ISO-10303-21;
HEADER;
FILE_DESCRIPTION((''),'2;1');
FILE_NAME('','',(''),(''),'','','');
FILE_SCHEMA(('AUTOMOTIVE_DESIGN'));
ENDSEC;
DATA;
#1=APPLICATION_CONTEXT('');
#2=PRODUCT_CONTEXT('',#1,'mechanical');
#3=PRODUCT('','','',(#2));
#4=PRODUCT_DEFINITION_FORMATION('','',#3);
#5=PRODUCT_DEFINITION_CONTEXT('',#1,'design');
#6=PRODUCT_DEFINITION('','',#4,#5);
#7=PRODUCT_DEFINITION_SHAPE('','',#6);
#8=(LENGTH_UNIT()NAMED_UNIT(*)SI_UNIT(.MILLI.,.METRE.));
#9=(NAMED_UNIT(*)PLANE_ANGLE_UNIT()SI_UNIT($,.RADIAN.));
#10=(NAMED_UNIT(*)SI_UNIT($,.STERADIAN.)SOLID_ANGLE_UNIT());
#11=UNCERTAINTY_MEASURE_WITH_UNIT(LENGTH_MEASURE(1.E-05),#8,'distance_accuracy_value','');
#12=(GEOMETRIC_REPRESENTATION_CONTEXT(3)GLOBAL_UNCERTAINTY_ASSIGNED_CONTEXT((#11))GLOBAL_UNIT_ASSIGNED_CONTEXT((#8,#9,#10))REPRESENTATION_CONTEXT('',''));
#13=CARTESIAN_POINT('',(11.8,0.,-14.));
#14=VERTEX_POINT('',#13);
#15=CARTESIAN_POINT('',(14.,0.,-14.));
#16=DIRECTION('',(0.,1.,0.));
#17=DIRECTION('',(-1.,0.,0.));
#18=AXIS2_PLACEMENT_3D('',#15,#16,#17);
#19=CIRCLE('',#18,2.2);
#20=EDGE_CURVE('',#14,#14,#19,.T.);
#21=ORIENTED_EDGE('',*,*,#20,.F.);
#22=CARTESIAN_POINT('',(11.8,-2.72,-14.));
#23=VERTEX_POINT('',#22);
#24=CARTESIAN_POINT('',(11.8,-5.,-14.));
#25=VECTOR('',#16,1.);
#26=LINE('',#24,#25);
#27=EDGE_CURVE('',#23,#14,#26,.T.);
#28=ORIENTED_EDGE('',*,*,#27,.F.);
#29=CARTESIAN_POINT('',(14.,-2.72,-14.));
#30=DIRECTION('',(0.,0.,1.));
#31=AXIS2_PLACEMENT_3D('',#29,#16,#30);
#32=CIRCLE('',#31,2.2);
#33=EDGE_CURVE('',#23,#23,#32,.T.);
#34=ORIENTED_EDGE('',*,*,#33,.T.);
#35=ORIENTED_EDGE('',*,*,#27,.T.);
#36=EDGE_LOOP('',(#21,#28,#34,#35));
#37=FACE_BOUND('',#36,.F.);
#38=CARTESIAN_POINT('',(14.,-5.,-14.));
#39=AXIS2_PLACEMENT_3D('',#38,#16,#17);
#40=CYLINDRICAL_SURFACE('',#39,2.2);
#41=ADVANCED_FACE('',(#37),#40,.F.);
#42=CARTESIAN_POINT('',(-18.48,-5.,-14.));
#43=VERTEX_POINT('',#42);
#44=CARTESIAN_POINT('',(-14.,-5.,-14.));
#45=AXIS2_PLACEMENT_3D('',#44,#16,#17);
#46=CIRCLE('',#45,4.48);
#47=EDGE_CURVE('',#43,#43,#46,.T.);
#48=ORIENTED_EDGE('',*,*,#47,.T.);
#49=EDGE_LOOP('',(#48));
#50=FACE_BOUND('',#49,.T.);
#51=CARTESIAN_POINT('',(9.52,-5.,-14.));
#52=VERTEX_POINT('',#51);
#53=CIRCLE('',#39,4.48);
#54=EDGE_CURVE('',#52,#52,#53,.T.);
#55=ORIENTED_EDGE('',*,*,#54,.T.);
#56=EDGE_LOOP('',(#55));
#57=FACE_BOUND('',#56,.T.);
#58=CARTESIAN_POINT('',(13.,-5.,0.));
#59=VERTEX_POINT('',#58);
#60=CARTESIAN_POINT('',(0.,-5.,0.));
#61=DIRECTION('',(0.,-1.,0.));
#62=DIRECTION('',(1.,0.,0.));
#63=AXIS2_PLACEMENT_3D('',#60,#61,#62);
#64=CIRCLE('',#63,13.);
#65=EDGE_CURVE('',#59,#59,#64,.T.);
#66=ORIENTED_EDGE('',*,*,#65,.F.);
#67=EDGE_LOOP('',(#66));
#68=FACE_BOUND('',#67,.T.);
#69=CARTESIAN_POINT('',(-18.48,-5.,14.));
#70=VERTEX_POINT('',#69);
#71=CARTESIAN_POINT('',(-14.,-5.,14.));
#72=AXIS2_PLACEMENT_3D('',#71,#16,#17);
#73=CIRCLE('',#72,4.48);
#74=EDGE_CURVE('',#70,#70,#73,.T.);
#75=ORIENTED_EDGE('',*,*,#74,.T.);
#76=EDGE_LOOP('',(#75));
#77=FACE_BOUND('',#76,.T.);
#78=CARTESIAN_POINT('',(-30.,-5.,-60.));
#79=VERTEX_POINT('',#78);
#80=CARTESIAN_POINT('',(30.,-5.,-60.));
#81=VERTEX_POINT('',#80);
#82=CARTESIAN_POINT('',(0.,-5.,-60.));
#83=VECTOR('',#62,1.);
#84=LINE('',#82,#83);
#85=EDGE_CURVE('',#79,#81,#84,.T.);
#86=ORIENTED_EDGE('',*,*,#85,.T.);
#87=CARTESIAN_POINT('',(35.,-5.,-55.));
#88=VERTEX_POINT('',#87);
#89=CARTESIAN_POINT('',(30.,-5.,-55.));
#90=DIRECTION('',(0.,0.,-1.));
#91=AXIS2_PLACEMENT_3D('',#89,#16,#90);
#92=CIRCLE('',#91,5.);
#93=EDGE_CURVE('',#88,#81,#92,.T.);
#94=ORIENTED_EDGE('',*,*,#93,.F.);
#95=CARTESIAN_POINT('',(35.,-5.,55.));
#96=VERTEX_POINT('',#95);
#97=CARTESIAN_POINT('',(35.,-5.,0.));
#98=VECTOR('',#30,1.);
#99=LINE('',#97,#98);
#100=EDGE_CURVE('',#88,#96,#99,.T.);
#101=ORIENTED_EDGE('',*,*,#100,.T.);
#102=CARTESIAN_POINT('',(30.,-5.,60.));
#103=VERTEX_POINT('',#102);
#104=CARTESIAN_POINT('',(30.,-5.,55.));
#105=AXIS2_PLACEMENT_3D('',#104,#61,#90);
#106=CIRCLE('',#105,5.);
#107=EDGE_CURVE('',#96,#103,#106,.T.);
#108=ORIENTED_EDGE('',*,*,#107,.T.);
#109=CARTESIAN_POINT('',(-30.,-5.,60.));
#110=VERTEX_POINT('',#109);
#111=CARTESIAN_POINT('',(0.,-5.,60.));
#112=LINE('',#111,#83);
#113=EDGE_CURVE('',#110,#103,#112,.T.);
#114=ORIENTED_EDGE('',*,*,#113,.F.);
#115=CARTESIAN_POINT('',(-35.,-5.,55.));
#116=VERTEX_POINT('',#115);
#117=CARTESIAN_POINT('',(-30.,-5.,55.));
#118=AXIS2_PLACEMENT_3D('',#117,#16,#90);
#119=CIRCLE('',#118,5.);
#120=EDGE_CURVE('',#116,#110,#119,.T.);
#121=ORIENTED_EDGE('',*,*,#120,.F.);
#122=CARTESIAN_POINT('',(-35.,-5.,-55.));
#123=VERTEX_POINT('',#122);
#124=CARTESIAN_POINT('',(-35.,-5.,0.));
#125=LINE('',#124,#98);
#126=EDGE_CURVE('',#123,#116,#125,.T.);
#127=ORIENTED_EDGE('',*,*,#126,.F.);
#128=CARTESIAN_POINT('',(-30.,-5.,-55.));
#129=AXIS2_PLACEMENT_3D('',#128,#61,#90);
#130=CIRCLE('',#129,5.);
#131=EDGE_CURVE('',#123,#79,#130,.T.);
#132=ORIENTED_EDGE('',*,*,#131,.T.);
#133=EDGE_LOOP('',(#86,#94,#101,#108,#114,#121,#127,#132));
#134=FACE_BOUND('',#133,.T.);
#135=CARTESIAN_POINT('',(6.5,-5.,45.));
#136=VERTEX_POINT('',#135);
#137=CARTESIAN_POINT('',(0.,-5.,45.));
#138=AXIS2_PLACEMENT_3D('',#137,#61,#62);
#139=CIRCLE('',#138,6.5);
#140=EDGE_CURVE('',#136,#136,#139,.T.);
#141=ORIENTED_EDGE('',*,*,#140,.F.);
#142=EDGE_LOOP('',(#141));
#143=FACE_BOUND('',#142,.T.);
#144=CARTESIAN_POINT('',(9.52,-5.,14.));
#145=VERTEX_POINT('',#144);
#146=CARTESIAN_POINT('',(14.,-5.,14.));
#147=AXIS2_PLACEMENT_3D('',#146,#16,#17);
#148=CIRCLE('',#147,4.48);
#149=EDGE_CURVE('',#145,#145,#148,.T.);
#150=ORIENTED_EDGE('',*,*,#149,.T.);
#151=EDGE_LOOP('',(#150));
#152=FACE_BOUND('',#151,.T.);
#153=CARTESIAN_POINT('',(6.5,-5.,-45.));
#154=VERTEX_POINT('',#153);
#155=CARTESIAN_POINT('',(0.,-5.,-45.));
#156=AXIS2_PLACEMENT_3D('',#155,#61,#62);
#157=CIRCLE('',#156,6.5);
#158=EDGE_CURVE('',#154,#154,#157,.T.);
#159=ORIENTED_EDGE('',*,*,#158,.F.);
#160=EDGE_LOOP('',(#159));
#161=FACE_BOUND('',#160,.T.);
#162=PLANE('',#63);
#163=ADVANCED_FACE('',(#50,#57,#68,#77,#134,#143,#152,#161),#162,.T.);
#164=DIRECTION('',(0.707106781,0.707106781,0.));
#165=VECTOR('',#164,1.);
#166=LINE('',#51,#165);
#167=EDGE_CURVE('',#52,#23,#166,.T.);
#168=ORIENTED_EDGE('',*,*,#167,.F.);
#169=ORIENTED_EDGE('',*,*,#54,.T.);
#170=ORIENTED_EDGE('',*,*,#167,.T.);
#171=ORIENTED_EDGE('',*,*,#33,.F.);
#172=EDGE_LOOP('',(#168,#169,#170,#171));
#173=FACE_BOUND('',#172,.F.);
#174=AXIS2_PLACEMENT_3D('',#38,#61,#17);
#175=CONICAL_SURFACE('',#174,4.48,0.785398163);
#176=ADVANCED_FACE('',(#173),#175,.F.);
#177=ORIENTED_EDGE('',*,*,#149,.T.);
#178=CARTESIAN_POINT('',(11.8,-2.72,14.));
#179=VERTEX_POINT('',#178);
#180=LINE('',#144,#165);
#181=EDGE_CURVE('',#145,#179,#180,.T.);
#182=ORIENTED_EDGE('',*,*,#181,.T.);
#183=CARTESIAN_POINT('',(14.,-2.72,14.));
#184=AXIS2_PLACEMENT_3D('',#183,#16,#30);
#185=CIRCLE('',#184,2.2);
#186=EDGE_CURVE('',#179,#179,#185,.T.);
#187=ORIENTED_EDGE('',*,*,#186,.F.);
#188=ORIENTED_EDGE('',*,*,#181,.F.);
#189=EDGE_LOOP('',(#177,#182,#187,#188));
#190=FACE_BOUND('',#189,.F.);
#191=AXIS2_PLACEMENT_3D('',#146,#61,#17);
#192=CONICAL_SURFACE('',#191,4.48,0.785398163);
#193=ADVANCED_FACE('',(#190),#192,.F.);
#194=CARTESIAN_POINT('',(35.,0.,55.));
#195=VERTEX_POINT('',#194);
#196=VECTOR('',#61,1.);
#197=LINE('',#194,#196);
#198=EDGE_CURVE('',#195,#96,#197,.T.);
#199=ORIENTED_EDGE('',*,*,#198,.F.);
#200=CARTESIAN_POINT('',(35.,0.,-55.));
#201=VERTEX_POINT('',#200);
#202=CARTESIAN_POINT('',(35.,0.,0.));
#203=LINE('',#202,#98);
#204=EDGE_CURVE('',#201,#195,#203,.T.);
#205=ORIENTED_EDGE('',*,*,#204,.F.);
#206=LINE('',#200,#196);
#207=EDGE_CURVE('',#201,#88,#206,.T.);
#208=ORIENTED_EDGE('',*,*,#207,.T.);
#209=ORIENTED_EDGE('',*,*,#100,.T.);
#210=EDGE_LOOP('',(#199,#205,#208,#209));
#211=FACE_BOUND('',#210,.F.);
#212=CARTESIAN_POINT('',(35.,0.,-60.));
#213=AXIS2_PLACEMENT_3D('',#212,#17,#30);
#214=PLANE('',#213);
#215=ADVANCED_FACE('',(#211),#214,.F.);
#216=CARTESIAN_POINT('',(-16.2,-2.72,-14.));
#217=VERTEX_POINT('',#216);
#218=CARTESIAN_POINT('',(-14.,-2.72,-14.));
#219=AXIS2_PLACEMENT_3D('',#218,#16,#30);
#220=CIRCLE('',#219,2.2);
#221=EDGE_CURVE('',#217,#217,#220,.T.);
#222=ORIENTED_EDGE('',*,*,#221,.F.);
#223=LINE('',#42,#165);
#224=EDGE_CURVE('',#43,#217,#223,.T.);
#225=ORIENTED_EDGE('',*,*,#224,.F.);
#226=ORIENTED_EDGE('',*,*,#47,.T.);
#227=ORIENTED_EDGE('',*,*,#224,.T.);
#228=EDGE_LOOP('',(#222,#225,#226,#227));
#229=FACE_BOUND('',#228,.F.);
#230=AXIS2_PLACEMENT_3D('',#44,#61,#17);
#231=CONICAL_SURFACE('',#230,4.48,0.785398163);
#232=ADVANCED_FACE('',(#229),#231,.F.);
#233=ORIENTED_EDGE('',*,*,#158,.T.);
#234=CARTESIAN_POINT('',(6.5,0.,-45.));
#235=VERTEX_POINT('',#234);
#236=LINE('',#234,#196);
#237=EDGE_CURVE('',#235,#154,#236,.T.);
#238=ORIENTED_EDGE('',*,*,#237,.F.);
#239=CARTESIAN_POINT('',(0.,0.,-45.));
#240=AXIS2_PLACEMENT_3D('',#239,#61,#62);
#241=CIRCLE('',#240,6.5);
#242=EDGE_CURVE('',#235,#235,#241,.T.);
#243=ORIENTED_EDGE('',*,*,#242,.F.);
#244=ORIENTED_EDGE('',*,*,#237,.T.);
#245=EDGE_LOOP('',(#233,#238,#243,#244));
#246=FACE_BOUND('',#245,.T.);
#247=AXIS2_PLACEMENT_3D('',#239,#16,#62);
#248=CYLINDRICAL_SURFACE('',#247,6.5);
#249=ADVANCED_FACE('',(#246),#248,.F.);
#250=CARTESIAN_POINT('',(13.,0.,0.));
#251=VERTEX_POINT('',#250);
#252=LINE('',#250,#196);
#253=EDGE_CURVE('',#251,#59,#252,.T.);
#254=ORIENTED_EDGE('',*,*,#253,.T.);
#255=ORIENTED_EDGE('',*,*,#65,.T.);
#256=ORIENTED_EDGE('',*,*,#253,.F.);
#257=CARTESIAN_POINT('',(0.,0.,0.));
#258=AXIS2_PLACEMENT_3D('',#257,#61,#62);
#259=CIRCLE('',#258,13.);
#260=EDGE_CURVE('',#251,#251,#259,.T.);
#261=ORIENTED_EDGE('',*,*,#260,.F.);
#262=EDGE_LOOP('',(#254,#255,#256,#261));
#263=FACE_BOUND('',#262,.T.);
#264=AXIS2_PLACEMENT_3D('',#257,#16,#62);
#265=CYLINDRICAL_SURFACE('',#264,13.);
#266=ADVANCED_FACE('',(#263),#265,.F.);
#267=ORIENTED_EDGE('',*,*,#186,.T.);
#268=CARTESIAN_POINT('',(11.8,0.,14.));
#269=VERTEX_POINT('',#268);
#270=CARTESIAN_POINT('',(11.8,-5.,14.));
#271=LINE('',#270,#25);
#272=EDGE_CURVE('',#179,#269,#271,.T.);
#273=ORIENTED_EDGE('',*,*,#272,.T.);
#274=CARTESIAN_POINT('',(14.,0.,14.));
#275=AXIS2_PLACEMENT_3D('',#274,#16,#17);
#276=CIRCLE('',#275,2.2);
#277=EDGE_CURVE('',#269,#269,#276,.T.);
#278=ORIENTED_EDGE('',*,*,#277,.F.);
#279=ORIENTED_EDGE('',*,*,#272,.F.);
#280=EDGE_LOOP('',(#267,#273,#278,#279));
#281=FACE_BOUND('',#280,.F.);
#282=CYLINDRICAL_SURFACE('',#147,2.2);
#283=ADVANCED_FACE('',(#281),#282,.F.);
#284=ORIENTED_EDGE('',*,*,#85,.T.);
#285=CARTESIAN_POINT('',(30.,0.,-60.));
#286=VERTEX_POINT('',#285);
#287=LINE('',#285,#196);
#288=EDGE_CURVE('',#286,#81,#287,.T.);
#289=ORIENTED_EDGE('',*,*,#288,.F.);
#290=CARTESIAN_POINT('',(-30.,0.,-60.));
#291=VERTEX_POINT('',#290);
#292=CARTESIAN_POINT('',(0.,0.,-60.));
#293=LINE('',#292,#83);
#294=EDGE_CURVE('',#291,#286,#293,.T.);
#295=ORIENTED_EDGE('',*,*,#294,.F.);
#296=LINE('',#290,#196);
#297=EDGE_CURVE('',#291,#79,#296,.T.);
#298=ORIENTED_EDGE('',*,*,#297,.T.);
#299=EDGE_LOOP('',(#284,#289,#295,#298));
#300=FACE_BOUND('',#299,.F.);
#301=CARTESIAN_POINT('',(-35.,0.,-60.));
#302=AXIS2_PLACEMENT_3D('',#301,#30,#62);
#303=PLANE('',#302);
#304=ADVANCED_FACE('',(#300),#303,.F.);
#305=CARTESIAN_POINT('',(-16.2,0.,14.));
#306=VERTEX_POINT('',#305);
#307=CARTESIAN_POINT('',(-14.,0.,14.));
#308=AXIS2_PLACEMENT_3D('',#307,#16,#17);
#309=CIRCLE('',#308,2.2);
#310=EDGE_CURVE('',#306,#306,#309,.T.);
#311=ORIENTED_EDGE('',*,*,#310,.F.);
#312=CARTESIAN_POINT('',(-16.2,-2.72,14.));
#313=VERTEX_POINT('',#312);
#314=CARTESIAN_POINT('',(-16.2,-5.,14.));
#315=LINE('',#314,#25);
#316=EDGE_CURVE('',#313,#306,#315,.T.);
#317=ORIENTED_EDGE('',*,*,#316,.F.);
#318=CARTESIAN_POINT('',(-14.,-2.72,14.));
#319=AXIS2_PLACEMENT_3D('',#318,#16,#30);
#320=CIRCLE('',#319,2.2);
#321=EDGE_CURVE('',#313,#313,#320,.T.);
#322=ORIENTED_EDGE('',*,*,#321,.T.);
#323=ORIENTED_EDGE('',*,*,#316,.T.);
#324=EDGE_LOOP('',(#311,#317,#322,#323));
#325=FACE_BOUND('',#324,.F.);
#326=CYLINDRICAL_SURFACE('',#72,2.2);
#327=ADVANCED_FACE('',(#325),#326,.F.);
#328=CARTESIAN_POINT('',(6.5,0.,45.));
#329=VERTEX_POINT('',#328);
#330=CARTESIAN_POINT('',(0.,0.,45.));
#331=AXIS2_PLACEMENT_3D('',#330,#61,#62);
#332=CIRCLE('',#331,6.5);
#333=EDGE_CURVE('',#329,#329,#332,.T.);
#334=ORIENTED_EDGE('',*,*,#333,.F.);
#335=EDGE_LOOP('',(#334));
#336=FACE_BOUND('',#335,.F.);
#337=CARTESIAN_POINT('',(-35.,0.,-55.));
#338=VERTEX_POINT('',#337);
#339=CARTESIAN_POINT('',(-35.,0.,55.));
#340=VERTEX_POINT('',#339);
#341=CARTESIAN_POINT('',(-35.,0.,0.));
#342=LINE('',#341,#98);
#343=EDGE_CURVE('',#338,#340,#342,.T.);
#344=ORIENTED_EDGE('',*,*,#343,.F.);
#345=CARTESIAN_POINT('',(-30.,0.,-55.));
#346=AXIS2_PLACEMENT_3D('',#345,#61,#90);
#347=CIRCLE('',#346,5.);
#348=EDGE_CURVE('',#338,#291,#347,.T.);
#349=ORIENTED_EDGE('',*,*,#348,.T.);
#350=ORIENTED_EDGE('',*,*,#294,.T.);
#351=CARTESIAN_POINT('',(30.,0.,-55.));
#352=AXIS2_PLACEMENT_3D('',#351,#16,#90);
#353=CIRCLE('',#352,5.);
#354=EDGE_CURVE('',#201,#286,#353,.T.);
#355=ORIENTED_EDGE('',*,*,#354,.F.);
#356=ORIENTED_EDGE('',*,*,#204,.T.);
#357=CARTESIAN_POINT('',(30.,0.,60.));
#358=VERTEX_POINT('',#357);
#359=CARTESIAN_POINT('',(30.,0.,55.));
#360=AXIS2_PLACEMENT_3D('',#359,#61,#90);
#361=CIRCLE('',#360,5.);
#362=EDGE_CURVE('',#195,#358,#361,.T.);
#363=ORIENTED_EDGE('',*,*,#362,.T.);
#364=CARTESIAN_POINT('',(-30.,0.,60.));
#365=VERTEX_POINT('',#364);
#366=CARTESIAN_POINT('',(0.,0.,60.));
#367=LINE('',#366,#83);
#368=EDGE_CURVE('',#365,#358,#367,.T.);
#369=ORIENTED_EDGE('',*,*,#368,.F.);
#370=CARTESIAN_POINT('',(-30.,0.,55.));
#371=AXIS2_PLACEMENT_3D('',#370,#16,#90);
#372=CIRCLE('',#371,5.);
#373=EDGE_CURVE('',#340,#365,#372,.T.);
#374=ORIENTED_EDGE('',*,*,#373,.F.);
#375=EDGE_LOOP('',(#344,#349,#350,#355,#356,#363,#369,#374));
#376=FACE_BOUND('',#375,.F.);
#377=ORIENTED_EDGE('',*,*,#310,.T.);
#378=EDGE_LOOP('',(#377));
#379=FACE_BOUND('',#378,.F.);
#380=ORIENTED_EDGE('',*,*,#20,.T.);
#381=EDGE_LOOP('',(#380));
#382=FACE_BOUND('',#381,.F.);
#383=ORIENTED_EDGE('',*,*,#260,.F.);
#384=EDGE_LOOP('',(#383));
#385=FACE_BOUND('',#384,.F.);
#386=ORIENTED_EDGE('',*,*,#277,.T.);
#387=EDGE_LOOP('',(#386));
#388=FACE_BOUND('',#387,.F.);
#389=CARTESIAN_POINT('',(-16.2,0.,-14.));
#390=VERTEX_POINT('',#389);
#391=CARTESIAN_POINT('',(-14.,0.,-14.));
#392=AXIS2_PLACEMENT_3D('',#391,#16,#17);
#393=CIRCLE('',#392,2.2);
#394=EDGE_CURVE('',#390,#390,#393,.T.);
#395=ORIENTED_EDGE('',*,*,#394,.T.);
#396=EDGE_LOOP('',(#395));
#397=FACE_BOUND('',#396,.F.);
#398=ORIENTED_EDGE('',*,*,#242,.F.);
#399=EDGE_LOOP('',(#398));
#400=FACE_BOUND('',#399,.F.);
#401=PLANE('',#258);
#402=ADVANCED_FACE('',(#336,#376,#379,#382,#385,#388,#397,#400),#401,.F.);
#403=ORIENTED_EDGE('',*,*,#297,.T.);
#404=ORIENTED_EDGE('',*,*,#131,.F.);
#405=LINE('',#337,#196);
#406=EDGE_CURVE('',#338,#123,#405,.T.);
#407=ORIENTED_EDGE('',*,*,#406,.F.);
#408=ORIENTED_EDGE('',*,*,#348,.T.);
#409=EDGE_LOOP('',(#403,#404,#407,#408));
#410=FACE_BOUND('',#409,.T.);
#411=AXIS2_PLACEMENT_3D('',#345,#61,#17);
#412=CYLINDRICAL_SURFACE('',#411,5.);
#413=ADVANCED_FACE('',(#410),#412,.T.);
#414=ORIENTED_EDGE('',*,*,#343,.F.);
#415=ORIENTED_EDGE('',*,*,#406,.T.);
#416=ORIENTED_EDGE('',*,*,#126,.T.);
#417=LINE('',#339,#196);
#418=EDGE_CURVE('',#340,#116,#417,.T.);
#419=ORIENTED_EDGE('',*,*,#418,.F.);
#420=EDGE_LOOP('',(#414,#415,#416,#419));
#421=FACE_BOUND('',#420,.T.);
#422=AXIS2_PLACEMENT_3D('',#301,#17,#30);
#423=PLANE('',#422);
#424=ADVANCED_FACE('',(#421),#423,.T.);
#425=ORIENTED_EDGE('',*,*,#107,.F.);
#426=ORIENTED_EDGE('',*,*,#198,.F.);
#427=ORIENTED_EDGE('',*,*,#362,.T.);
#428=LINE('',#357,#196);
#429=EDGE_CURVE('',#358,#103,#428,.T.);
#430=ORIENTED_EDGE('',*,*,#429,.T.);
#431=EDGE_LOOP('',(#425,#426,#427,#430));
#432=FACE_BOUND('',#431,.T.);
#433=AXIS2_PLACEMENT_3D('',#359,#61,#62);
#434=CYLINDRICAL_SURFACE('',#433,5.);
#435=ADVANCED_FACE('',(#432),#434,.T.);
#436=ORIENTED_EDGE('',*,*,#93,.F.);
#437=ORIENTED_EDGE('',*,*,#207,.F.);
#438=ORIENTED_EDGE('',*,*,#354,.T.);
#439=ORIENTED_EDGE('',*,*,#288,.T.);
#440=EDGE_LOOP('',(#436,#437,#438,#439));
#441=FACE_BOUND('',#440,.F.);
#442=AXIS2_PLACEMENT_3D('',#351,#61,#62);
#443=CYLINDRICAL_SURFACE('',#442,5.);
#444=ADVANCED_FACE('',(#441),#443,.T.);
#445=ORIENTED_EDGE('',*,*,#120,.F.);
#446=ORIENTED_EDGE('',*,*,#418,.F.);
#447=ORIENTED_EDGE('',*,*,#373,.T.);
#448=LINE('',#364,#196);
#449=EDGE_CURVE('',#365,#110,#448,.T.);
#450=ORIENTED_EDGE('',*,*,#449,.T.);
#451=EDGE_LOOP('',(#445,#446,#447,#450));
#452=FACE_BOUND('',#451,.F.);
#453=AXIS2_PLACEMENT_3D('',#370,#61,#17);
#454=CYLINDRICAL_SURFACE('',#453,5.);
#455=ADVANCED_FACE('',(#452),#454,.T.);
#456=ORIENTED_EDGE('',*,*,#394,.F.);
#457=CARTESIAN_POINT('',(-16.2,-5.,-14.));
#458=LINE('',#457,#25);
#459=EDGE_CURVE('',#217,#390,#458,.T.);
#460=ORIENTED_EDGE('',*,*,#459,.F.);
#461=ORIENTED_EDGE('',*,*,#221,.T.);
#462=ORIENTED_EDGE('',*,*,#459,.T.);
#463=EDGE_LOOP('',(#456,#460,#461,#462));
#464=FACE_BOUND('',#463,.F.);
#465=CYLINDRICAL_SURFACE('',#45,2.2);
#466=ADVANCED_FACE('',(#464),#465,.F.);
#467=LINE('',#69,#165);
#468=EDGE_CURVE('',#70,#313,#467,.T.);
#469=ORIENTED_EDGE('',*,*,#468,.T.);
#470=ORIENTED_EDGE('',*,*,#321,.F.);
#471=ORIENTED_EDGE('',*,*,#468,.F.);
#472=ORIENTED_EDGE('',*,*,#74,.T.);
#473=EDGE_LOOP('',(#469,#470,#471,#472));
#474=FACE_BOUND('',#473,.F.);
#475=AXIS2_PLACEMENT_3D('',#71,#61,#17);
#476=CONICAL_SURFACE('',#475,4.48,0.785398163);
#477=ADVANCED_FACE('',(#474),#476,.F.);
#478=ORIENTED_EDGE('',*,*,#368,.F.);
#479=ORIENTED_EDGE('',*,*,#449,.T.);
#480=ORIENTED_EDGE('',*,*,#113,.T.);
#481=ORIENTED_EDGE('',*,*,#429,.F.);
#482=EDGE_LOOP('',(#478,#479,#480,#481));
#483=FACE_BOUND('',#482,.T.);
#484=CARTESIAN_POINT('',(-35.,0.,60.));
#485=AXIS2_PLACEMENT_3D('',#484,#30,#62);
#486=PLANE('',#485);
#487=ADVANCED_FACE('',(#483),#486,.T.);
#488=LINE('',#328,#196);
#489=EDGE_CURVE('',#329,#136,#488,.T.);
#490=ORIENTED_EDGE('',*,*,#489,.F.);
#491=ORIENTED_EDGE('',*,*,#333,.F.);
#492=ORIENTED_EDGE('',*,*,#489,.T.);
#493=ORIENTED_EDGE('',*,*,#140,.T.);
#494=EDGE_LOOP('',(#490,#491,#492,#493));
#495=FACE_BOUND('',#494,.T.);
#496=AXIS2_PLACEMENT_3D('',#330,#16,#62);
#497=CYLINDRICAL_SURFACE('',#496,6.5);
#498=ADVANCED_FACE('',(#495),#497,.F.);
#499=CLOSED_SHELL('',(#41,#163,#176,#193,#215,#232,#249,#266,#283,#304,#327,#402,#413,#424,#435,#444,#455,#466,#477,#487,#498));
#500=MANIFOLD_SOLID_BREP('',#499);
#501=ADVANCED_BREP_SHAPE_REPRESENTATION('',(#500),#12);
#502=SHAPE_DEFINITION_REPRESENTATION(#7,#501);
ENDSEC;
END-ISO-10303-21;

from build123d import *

# Parameters (mm, degrees)
F0_W           = 70
F0_H           = 120
F0_R           = 6.5
F0_R_2         = 13
F1_DEPTH       = 5
F3_D           = 4.4
F3_DEPTH       = 10
F3_CSINK_D     = 8.96
F3_CSINK_ANGLE = 90
F3_TIP         = 1.3218933619
F4_R           = 5


# Not quite as in the source:
# - a feature names something its author has since deleted; it is built from what else it names


with BuildPart() as f1:
    # F0 (on Front) → F1 (new body)
    with BuildSketch(Plane.XZ):
        Rectangle(F0_W, F0_H)
        with Locations((0, -45)):
            Circle(F0_R, mode=Mode.SUBTRACT)
        Circle(F0_R_2, mode=Mode.SUBTRACT)
        with Locations((0, 45)):
            Circle(F0_R, mode=Mode.SUBTRACT)
    extrude(amount=F1_DEPTH)

    # F3
    with Locations(Plane.XZ.offset(5)):
        with Locations((14, 14), (-14, 14), (-14, -14), (14, -14)):
            CounterSinkHole(F3_D / 2, F3_CSINK_D / 2, depth=F3_DEPTH, counter_sink_angle=F3_CSINK_ANGLE)
            with Locations((0, 0, -(F3_DEPTH + F3_TIP / 2))):  # 118° drill point
                Cone(0, F3_D / 2, F3_TIP, mode=Mode.SUBTRACT)

    # F4
    f4_edges = [f1.edges().sort_by_distance(p)[0] for p in [
        (35, -2.5, 60),
        (35, -2.5, -60),
        (-35, -2.5, -60),
        (-35, -2.5, 60),
    ]]
    fillet(f4_edges, radius=F4_R)


solid = f1.part
